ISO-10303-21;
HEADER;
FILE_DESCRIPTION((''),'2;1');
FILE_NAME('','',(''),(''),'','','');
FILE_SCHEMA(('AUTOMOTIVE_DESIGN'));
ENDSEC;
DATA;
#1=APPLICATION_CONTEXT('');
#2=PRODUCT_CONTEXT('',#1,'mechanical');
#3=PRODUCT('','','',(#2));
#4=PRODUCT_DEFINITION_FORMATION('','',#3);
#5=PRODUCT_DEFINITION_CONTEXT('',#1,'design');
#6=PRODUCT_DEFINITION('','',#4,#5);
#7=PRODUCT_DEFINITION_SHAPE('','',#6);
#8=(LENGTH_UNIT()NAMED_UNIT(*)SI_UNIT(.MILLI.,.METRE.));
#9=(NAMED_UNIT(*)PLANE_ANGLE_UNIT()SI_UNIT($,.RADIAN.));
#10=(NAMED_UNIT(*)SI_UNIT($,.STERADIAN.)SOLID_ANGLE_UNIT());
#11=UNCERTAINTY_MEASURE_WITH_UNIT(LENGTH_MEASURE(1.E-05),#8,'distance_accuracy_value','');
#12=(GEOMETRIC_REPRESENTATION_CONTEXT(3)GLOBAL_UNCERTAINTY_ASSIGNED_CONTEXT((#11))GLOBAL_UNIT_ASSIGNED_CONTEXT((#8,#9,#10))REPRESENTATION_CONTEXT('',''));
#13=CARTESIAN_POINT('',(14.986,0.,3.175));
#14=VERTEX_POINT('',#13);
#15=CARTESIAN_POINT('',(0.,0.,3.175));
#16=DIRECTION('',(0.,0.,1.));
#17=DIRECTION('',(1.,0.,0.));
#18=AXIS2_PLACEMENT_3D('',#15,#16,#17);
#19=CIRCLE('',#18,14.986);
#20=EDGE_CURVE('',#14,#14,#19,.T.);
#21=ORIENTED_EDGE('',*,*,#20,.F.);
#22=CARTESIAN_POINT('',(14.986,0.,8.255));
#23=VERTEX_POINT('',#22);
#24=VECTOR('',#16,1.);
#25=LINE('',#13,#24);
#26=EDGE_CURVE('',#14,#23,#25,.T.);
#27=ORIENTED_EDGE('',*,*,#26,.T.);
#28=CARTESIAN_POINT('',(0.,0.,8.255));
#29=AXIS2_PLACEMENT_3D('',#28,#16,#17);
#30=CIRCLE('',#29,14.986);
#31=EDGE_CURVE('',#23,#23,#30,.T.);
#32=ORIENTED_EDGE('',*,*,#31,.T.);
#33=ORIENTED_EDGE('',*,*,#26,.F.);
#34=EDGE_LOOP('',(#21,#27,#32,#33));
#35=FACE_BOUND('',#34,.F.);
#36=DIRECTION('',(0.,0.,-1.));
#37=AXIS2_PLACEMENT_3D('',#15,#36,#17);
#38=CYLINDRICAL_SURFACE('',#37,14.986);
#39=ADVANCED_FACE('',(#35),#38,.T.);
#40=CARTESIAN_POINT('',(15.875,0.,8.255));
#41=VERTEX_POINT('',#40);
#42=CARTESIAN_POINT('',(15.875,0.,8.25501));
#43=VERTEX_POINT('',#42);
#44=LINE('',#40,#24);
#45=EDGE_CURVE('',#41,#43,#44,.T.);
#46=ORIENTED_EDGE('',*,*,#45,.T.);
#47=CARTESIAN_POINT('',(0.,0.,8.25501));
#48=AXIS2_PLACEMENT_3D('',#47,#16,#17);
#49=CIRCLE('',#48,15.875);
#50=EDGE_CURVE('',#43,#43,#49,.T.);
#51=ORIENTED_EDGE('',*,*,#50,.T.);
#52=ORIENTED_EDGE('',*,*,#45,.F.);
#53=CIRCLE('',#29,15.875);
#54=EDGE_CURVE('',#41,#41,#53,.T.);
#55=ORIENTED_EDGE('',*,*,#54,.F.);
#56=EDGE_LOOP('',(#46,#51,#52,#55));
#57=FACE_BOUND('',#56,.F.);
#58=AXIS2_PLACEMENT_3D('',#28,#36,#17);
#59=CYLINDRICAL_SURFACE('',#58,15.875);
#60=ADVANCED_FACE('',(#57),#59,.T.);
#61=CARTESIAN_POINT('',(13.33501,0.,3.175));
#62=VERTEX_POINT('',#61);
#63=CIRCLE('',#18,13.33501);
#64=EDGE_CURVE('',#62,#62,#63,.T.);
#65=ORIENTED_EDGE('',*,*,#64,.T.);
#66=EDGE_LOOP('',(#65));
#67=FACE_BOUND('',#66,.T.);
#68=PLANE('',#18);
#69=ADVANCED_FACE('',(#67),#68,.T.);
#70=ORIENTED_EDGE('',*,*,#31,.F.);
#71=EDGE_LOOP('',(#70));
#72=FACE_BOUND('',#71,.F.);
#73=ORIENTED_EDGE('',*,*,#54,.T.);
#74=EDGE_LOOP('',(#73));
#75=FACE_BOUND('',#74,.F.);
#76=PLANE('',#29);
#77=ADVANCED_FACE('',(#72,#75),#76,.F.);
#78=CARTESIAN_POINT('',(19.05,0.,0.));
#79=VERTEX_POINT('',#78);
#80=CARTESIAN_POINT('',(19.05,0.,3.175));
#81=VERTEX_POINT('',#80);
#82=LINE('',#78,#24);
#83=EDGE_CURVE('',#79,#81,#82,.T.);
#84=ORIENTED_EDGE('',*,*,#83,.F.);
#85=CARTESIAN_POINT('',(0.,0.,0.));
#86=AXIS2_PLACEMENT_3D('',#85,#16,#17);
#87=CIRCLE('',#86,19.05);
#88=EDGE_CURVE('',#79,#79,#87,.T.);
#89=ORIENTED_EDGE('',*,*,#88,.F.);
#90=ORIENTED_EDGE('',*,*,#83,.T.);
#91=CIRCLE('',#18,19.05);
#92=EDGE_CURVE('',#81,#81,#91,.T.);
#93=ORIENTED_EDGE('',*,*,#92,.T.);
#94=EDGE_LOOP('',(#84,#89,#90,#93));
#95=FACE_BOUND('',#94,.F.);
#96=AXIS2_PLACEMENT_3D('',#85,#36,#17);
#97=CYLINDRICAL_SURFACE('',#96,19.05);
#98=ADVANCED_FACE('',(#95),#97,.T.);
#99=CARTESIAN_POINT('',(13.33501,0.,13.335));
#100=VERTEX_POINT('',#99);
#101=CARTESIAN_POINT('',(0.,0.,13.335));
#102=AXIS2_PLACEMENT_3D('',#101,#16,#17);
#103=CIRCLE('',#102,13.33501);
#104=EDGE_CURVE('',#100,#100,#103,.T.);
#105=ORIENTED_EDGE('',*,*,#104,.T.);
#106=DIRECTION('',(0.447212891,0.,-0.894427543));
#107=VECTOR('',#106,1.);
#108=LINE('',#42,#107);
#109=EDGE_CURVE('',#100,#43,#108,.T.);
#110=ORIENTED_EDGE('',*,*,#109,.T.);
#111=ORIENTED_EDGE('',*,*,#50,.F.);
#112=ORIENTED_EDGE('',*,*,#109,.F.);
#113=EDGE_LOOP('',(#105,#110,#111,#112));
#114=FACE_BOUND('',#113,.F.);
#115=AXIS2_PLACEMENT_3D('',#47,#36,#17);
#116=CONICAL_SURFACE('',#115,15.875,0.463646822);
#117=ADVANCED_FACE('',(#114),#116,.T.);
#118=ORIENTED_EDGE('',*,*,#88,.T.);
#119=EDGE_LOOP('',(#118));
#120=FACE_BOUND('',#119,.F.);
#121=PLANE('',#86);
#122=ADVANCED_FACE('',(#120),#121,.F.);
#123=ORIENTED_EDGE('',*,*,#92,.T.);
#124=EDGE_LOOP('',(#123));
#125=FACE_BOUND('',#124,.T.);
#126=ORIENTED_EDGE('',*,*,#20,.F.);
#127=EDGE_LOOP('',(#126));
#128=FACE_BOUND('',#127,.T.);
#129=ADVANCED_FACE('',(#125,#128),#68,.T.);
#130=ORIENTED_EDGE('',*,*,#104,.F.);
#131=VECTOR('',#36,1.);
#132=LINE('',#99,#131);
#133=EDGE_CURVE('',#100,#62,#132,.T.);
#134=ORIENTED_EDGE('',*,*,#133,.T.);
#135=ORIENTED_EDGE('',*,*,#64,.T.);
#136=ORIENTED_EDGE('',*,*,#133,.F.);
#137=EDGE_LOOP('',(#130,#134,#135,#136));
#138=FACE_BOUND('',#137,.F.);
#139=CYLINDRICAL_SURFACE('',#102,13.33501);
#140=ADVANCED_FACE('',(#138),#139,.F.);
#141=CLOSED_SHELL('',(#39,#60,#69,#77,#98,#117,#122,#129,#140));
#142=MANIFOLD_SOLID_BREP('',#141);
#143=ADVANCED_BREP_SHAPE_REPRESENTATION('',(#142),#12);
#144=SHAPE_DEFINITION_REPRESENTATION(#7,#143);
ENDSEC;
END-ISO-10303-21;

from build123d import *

# Parameters (mm, degrees)
F0_R     = 19.05
F1_DEPTH = 3.175
F2_R     = 14.986
F3_DEPTH = 5.08
F4_R     = 15.875
F5_DEPTH = 5.08
F6_SIZE2 = 5.07999
F6_SIZE  = 2.53999
F7_DEPTH = 10.16


# Not quite as in the source:
# - a fillet or chamfer is up to 0.001 mm smaller than in the source, because OpenCascade refuses the exact size


with BuildPart() as f1:
    # F0 (on Top) → F1 (new body)
    with BuildSketch(Plane.XY):
        Circle(F0_R)
    extrude(amount=F1_DEPTH)

    # F2 (on face) → F3 (join)
    with BuildSketch(Plane.XY.offset(3.175)):
        Circle(F2_R)
    extrude(amount=F3_DEPTH)

    # F4 (on face) → F5 (join)
    with BuildSketch(Plane.XY.offset(8.255)):
        Circle(F4_R)
    extrude(amount=F5_DEPTH)

    # F6 (size 2.54 and 5.08 in the source; OpenCascade refuses exactly that, so slightly less here)
    f6_edges = [f1.edges().sort_by_distance(p)[0] for p in [
        (-15.875, 0, 13.335),
    ]]
    f6_side = f1.faces().sort_by_distance((0, 0, 13.335))[0]
    chamfer(f6_edges, length=F6_SIZE, length2=F6_SIZE2, reference=f6_side)

    # F7 (cut): a face of the model
    f7_faces = [f1.faces().sort_by_distance(p)[0] for p in [
        (0, 0, 13.335),
    ]]
    extrude(f7_faces, amount=-F7_DEPTH, mode=Mode.SUBTRACT)


solid = f1.part
